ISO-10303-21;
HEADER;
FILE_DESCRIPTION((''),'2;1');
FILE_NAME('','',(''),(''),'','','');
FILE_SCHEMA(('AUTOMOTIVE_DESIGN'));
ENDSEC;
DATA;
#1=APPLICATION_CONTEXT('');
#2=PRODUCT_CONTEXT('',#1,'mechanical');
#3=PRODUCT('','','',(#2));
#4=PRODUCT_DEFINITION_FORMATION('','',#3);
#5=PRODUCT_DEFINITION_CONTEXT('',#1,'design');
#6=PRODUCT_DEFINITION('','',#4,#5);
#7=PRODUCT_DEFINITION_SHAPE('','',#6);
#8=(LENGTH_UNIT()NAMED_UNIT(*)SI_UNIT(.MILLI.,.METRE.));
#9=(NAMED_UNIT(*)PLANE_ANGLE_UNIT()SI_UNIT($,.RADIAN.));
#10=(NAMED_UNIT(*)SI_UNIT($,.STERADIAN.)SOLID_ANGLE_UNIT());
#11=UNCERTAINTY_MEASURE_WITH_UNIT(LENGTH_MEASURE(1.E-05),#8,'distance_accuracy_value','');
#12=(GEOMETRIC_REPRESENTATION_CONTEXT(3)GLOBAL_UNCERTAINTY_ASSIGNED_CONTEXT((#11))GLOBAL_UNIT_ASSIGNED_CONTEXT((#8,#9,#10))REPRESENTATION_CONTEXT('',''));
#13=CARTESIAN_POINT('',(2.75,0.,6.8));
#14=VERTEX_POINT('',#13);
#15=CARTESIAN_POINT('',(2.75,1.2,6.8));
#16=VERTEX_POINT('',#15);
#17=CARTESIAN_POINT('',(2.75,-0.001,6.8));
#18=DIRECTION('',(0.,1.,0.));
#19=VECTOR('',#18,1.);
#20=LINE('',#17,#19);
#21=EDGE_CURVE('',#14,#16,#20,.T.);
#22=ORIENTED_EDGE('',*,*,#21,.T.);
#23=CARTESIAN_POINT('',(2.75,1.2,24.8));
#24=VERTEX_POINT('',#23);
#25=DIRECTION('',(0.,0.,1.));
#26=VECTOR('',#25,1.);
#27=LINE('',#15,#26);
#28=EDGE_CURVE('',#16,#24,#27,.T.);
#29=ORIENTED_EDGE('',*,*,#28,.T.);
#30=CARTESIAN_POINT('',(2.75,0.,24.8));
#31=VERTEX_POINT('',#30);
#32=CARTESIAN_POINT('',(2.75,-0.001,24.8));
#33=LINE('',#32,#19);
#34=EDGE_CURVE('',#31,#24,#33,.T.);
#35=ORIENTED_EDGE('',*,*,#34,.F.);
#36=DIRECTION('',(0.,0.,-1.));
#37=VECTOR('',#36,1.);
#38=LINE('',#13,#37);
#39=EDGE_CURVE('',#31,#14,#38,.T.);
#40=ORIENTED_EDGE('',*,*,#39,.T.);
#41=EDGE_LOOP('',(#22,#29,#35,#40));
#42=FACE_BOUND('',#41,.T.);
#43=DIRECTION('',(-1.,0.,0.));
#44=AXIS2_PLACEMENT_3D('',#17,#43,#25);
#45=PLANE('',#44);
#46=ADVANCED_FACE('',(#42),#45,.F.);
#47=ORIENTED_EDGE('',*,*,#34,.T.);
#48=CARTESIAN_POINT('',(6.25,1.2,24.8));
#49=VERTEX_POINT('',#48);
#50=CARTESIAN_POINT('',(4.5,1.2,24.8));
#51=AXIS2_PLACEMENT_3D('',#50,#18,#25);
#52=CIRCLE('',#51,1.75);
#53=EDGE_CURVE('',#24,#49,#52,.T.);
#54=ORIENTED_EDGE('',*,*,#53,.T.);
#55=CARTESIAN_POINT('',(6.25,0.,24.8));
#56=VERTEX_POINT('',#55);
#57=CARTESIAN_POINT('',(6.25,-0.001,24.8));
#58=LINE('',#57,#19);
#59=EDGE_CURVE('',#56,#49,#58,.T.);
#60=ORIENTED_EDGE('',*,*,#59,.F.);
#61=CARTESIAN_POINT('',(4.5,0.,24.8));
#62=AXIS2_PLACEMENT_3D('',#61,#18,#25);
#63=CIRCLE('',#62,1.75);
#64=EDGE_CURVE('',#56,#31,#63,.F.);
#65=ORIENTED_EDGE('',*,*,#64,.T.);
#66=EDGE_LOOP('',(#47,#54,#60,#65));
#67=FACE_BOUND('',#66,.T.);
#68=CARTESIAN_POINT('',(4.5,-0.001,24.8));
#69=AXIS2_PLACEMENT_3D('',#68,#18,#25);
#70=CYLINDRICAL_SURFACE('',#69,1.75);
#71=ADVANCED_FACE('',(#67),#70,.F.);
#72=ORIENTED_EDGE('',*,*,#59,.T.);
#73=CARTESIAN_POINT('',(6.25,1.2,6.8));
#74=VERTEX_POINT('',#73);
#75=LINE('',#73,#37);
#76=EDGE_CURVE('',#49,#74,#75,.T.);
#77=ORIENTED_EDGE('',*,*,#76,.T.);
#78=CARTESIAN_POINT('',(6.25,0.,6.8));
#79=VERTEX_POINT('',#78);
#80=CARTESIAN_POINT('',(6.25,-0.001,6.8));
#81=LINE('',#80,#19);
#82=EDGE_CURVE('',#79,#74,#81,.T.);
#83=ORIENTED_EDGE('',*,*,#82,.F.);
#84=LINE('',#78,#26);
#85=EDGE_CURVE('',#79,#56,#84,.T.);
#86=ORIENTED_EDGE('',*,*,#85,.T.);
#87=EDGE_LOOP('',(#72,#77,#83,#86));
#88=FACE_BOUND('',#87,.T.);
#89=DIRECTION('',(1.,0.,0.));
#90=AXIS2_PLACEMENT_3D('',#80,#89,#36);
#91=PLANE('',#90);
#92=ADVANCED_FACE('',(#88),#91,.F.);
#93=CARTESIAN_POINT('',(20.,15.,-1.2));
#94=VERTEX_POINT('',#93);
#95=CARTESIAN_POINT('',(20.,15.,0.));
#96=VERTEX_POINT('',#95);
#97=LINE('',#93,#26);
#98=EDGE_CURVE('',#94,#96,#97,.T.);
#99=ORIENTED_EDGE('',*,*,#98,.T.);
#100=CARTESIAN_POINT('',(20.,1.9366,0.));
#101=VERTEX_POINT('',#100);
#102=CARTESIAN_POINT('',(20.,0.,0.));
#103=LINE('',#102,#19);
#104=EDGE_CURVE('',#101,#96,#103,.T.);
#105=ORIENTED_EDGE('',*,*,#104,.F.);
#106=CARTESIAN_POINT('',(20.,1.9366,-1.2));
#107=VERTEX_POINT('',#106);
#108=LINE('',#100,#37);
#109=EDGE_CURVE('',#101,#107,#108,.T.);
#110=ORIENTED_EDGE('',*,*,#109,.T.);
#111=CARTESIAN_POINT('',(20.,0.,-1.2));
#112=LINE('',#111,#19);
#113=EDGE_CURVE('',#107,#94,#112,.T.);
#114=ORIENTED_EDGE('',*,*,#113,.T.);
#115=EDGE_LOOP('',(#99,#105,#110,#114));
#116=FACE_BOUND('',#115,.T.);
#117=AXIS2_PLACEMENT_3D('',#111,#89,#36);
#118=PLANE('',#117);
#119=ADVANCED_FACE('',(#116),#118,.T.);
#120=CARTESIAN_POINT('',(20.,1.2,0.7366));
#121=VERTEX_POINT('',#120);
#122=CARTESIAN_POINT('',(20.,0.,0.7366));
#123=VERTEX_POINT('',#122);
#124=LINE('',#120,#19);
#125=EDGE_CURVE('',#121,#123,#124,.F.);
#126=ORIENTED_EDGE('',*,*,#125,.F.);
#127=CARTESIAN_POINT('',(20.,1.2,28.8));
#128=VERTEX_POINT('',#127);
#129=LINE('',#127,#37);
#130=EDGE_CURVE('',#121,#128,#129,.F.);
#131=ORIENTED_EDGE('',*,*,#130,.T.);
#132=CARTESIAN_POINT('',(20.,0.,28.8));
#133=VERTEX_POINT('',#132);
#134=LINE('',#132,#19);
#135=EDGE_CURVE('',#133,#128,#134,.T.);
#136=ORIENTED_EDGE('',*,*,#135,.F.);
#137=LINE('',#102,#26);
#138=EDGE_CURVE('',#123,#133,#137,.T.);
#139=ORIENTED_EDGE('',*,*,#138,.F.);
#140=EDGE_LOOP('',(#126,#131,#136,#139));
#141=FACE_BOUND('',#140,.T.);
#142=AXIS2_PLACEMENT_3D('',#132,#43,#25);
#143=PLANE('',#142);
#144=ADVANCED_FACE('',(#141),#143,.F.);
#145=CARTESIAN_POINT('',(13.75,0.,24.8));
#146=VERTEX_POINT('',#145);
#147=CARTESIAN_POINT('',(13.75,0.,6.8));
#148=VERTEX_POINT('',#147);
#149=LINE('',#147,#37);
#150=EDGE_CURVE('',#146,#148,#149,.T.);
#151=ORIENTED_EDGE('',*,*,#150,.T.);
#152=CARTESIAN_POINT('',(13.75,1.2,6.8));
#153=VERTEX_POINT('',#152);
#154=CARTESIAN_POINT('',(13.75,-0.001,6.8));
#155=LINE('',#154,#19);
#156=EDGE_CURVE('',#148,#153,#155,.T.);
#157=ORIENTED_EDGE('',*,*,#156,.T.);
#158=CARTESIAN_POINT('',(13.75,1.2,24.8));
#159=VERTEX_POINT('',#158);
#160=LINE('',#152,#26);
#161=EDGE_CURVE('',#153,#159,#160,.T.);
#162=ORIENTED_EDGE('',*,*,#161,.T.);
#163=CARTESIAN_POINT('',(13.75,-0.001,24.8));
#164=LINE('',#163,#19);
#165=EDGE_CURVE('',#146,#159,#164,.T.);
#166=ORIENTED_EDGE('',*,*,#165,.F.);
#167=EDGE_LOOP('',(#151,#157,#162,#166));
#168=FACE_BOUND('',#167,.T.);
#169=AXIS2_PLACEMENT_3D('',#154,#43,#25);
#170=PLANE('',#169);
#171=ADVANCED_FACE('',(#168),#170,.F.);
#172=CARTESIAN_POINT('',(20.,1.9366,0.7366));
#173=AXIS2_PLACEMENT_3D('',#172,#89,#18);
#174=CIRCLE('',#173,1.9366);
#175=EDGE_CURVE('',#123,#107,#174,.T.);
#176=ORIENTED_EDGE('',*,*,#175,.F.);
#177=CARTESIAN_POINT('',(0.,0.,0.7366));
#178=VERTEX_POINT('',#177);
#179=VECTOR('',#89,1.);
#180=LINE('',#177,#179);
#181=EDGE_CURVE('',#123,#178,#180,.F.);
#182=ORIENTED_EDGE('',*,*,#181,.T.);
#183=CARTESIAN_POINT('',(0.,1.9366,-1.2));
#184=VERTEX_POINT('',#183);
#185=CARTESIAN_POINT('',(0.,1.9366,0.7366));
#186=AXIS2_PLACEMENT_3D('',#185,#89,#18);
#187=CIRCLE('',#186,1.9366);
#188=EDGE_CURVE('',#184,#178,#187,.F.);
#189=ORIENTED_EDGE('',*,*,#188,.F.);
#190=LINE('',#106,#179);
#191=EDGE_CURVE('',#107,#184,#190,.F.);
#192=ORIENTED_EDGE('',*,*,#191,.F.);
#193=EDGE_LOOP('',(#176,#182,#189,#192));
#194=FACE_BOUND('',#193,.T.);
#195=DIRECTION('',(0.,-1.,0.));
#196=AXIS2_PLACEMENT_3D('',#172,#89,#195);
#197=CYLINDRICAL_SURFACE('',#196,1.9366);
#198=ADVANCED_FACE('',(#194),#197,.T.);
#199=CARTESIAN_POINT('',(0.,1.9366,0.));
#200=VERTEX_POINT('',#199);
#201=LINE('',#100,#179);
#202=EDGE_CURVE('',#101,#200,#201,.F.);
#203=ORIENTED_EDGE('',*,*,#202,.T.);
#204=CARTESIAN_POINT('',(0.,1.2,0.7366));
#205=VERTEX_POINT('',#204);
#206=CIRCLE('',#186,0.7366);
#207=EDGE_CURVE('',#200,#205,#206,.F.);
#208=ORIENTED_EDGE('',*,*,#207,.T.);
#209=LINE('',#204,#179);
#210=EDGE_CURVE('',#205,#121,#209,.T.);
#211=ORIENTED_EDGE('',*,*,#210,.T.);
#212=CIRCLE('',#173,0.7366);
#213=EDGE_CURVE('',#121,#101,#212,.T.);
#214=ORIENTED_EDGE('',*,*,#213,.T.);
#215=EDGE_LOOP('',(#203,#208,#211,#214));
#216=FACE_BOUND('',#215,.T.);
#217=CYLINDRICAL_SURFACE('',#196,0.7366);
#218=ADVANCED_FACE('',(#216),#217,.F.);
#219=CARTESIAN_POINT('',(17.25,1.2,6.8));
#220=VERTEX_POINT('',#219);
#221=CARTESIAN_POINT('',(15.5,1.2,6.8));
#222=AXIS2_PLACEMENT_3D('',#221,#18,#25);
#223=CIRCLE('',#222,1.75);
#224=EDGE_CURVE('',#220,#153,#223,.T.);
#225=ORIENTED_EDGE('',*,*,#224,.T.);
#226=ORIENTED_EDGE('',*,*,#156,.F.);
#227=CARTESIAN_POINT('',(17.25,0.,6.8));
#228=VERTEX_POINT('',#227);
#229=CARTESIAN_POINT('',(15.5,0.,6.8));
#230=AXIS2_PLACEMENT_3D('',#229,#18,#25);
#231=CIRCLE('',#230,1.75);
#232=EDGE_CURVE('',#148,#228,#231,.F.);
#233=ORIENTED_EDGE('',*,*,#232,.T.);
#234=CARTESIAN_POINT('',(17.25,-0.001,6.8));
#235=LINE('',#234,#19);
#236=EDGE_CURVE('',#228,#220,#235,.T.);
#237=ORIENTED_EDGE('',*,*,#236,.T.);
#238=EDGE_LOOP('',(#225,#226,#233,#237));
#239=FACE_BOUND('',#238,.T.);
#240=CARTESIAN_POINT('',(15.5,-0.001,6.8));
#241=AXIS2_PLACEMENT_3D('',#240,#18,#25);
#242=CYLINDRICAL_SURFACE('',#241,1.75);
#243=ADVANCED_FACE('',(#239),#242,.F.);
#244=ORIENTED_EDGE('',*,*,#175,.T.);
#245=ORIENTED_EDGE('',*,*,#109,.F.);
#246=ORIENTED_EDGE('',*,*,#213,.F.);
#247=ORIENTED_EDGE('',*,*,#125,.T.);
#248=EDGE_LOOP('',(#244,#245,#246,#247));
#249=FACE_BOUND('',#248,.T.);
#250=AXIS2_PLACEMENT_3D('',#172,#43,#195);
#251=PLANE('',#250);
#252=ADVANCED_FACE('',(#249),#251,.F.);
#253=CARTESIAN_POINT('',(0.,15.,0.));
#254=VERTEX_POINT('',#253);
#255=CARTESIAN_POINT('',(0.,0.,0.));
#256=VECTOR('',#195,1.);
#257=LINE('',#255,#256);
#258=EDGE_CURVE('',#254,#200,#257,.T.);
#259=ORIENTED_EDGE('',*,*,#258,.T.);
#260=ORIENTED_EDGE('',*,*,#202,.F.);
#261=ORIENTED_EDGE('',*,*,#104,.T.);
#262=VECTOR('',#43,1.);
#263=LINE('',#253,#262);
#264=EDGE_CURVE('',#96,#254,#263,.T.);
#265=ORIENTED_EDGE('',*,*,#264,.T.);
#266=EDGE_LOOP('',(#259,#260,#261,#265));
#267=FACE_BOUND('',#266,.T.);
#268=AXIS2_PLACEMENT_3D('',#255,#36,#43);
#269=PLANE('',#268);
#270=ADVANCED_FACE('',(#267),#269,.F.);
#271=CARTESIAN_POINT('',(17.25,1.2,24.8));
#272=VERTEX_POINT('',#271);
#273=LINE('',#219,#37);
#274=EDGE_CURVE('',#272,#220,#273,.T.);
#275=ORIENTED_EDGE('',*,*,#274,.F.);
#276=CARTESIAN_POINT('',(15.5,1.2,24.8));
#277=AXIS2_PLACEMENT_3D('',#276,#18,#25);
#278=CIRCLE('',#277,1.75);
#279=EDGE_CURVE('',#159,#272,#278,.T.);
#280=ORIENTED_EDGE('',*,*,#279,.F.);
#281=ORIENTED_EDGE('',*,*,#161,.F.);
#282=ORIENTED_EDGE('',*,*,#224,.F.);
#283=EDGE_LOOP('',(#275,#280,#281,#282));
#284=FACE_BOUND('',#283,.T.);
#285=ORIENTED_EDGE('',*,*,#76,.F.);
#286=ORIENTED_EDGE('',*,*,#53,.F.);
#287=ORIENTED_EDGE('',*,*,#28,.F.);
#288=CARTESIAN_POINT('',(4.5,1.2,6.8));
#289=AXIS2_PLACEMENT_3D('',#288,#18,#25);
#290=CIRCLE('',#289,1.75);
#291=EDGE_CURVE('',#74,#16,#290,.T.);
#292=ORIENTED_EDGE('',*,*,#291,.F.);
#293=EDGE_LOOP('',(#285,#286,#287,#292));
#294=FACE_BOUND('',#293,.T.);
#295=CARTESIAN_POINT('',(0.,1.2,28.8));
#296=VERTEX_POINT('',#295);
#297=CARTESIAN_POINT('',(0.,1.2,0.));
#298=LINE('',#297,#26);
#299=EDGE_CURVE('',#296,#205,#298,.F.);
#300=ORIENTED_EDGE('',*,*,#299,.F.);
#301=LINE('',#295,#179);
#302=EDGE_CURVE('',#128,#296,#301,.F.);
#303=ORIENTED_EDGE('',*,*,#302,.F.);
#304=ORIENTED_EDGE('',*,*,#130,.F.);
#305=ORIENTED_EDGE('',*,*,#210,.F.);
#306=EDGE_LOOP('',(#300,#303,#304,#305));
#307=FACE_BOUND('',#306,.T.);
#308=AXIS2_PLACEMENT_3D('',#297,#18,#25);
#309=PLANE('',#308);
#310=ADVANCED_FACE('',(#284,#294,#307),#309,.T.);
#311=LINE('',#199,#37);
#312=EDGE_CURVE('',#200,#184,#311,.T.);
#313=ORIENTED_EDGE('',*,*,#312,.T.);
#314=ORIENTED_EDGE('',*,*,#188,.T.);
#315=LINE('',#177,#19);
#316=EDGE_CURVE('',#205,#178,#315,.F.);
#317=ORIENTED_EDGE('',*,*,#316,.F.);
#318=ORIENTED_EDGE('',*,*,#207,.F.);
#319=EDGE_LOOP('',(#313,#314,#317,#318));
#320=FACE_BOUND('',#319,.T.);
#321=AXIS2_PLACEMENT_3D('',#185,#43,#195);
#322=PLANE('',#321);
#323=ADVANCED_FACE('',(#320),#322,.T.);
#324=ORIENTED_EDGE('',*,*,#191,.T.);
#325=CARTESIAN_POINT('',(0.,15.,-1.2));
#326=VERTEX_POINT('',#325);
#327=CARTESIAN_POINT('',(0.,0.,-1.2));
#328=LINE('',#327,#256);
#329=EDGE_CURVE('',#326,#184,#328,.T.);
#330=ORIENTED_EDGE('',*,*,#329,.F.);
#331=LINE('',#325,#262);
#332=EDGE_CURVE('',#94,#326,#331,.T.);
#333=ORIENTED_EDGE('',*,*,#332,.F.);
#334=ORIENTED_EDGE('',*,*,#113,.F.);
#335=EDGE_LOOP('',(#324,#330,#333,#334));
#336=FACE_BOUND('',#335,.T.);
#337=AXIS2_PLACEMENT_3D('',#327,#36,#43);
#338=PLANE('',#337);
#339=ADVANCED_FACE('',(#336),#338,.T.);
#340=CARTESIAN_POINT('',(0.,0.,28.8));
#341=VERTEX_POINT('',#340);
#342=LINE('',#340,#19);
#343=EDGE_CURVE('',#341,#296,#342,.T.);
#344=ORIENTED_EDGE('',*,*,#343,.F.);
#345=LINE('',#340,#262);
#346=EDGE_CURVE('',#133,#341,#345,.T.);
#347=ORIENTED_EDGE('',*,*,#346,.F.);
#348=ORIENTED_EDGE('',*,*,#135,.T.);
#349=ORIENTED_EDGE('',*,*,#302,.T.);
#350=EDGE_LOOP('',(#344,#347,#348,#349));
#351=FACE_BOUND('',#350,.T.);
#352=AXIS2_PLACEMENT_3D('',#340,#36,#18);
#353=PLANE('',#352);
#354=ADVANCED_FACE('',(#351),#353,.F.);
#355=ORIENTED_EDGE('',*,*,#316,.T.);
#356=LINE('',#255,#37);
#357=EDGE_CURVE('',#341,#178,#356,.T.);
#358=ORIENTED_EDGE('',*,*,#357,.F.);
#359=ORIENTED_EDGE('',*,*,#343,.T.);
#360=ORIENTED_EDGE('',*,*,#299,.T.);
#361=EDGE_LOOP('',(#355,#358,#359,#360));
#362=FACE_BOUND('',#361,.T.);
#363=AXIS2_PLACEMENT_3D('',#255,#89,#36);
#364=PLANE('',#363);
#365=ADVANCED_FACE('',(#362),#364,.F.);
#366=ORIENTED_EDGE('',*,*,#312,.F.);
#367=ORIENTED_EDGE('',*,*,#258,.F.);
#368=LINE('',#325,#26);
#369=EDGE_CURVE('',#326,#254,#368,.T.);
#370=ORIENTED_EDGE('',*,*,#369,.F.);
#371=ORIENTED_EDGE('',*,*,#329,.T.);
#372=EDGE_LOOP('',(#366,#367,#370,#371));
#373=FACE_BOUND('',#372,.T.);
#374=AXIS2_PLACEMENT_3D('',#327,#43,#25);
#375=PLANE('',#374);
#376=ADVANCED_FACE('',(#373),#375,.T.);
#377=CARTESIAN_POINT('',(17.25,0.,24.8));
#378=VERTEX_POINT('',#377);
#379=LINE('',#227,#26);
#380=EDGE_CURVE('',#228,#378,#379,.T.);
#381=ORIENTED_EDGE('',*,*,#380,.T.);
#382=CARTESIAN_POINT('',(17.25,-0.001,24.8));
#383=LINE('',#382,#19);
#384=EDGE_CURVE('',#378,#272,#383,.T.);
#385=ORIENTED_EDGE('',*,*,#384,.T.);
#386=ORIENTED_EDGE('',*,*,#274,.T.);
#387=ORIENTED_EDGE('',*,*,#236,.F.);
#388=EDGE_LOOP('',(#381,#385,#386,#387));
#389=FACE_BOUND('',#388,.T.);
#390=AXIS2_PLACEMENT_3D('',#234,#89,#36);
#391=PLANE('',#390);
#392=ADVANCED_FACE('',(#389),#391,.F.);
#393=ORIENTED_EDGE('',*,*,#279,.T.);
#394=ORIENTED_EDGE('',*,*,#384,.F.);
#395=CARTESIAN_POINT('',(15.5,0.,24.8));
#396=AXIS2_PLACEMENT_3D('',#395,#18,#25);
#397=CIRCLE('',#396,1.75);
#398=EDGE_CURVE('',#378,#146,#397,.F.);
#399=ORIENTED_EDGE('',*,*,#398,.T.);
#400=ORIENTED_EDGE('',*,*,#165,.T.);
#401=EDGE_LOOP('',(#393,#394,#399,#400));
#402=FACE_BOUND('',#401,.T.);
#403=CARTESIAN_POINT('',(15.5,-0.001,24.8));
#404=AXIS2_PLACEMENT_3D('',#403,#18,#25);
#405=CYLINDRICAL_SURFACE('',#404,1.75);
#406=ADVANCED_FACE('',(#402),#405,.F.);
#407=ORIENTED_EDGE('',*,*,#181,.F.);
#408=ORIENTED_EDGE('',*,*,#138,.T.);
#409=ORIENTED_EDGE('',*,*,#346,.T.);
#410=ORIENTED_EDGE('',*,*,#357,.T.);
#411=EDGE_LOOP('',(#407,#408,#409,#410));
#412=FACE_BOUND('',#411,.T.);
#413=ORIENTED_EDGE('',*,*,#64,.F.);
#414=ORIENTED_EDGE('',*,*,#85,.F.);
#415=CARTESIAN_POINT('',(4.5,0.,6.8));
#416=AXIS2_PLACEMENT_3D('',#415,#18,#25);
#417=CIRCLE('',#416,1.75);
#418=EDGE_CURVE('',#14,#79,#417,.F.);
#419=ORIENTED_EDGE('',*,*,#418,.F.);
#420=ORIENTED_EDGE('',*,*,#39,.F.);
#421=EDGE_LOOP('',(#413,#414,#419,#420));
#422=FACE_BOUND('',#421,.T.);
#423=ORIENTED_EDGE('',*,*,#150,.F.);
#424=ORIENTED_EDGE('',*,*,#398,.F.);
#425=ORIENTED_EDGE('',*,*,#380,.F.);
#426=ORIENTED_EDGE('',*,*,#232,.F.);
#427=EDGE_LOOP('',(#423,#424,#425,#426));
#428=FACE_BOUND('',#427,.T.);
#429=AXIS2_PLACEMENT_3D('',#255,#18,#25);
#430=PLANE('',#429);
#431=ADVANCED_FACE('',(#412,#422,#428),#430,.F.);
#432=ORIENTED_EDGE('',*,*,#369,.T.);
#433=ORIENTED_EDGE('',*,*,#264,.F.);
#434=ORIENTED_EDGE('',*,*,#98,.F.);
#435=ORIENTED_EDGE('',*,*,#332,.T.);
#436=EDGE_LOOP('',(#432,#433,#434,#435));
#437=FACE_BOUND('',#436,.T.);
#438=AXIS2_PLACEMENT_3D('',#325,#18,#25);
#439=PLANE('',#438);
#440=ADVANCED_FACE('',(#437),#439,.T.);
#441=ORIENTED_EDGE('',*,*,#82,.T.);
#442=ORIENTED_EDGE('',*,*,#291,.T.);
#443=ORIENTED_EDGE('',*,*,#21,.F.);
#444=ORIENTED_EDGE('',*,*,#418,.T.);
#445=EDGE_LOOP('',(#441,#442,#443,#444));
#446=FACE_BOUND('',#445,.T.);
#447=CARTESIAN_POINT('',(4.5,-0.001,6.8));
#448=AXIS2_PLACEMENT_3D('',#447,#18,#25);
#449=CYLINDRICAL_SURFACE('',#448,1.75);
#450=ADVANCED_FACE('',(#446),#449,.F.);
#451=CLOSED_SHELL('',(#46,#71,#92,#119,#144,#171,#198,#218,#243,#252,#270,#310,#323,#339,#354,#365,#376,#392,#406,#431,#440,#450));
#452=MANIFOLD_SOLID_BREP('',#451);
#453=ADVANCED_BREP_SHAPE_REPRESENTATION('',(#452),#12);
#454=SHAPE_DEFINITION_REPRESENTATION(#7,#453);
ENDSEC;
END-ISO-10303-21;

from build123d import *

# Parameters (mm, degrees)
SKETCH_1_W                       = 20
SKETCH_1_H                       = 15
SM_BASE_FLANGE_1_DEPTH           = 1.2
SM_EDGE_FLANGE_1_STRIP_W         = 6.2732
SM_EDGE_FLANGE_1_STRIP_H         = 1.2
SM_EDGE_FLANGE_1_STRIP_CUT_DEPTH = 20
SM_EDGE_FLANGE_1_DEPTH           = 20
CUT_EXTRUDE_1_REACH              = 39.681


# Sheet-metal steps are written as plain solids
with BuildPart() as part:
    # Sketch 1 → Базовая кромка1 (new body)
    with BuildSketch(Plane.XY):
        with Locations((10, 7.5)):
            Rectangle(SKETCH_1_W, SKETCH_1_H)
    extrude(amount=-SM_BASE_FLANGE_1_DEPTH)

    # Ребро-кромка1 strip (across the edge) → Ребро-кромка1 strip cut (cut)
    with BuildSketch(Plane.YZ):
        with Locations((-1.2, -0.6)):
            Rectangle(SM_EDGE_FLANGE_1_STRIP_W, SM_EDGE_FLANGE_1_STRIP_H)
    extrude(amount=SM_EDGE_FLANGE_1_STRIP_CUT_DEPTH, mode=Mode.SUBTRACT)

    # Ребро-кромка1 section (across the edge) → Ребро-кромка1 (add)
    with BuildSketch(Plane.YZ):
        with BuildLine():
            Line((0, 0.7366), (0, 28.8))
            Line((0, 28.8), (1.2, 28.8))
            Line((1.2, 28.8), (1.2, 0.7366))
            ThreePointArc((1.2, 0.7366), (1.415745145, 0.215745145), (1.9366, 0))
            Line((1.9366, 0), (1.9366, -1.2))
            ThreePointArc((1.9366, -1.2), (0.567217008, -0.632782992), (0, 0.7366))
        make_face()
    extrude(amount=SM_EDGE_FLANGE_1_DEPTH)

    # Эскиз9 → Вырез-Вытянуть1 (cut, up to next)
    with BuildSketch(Plane(origin=(0, 1.2, 0), x_dir=(1, 0, 0), z_dir=(0, 1, 0)), mode=Mode.PRIVATE) as cut_extrude_1_sk1:
        with BuildLine():
            Line((6.25, -6.8), (6.25, -24.8))
            ThreePointArc((6.25, -24.8), (4.5, -26.55), (2.75, -24.8))
            Line((2.75, -24.8), (2.75, -6.8))
            ThreePointArc((2.75, -6.8), (4.5, -5.05), (6.25, -6.8))
        make_face()
    cut_extrude_1_tool1 = extrude(cut_extrude_1_sk1.sketch, amount=-CUT_EXTRUDE_1_REACH, mode=Mode.PRIVATE) & part.part
    # Эскиз9 → Вырез-Вытянуть1 (cut, up to next)
    with BuildSketch(Plane(origin=(0, 1.2, 0), x_dir=(1, 0, 0), z_dir=(0, 1, 0)), mode=Mode.PRIVATE) as cut_extrude_1_sk2:
        with BuildLine():
            Line((17.25, -6.8), (17.25, -24.8))
            ThreePointArc((17.25, -24.8), (15.5, -26.55), (13.75, -24.8))
            Line((13.75, -24.8), (13.75, -6.8))
            ThreePointArc((13.75, -6.8), (15.5, -5.05), (17.25, -6.8))
        make_face()
    cut_extrude_1_tool2 = extrude(cut_extrude_1_sk2.sketch, amount=-CUT_EXTRUDE_1_REACH, mode=Mode.PRIVATE) & part.part
    add(cut_extrude_1_tool1.solids().sort_by_distance((4.5, 1.2, 15.8))[0], mode=Mode.SUBTRACT)
    add(cut_extrude_1_tool2.solids().sort_by_distance((15.5, 1.2, 15.8))[0], mode=Mode.SUBTRACT)


solid = part.part
